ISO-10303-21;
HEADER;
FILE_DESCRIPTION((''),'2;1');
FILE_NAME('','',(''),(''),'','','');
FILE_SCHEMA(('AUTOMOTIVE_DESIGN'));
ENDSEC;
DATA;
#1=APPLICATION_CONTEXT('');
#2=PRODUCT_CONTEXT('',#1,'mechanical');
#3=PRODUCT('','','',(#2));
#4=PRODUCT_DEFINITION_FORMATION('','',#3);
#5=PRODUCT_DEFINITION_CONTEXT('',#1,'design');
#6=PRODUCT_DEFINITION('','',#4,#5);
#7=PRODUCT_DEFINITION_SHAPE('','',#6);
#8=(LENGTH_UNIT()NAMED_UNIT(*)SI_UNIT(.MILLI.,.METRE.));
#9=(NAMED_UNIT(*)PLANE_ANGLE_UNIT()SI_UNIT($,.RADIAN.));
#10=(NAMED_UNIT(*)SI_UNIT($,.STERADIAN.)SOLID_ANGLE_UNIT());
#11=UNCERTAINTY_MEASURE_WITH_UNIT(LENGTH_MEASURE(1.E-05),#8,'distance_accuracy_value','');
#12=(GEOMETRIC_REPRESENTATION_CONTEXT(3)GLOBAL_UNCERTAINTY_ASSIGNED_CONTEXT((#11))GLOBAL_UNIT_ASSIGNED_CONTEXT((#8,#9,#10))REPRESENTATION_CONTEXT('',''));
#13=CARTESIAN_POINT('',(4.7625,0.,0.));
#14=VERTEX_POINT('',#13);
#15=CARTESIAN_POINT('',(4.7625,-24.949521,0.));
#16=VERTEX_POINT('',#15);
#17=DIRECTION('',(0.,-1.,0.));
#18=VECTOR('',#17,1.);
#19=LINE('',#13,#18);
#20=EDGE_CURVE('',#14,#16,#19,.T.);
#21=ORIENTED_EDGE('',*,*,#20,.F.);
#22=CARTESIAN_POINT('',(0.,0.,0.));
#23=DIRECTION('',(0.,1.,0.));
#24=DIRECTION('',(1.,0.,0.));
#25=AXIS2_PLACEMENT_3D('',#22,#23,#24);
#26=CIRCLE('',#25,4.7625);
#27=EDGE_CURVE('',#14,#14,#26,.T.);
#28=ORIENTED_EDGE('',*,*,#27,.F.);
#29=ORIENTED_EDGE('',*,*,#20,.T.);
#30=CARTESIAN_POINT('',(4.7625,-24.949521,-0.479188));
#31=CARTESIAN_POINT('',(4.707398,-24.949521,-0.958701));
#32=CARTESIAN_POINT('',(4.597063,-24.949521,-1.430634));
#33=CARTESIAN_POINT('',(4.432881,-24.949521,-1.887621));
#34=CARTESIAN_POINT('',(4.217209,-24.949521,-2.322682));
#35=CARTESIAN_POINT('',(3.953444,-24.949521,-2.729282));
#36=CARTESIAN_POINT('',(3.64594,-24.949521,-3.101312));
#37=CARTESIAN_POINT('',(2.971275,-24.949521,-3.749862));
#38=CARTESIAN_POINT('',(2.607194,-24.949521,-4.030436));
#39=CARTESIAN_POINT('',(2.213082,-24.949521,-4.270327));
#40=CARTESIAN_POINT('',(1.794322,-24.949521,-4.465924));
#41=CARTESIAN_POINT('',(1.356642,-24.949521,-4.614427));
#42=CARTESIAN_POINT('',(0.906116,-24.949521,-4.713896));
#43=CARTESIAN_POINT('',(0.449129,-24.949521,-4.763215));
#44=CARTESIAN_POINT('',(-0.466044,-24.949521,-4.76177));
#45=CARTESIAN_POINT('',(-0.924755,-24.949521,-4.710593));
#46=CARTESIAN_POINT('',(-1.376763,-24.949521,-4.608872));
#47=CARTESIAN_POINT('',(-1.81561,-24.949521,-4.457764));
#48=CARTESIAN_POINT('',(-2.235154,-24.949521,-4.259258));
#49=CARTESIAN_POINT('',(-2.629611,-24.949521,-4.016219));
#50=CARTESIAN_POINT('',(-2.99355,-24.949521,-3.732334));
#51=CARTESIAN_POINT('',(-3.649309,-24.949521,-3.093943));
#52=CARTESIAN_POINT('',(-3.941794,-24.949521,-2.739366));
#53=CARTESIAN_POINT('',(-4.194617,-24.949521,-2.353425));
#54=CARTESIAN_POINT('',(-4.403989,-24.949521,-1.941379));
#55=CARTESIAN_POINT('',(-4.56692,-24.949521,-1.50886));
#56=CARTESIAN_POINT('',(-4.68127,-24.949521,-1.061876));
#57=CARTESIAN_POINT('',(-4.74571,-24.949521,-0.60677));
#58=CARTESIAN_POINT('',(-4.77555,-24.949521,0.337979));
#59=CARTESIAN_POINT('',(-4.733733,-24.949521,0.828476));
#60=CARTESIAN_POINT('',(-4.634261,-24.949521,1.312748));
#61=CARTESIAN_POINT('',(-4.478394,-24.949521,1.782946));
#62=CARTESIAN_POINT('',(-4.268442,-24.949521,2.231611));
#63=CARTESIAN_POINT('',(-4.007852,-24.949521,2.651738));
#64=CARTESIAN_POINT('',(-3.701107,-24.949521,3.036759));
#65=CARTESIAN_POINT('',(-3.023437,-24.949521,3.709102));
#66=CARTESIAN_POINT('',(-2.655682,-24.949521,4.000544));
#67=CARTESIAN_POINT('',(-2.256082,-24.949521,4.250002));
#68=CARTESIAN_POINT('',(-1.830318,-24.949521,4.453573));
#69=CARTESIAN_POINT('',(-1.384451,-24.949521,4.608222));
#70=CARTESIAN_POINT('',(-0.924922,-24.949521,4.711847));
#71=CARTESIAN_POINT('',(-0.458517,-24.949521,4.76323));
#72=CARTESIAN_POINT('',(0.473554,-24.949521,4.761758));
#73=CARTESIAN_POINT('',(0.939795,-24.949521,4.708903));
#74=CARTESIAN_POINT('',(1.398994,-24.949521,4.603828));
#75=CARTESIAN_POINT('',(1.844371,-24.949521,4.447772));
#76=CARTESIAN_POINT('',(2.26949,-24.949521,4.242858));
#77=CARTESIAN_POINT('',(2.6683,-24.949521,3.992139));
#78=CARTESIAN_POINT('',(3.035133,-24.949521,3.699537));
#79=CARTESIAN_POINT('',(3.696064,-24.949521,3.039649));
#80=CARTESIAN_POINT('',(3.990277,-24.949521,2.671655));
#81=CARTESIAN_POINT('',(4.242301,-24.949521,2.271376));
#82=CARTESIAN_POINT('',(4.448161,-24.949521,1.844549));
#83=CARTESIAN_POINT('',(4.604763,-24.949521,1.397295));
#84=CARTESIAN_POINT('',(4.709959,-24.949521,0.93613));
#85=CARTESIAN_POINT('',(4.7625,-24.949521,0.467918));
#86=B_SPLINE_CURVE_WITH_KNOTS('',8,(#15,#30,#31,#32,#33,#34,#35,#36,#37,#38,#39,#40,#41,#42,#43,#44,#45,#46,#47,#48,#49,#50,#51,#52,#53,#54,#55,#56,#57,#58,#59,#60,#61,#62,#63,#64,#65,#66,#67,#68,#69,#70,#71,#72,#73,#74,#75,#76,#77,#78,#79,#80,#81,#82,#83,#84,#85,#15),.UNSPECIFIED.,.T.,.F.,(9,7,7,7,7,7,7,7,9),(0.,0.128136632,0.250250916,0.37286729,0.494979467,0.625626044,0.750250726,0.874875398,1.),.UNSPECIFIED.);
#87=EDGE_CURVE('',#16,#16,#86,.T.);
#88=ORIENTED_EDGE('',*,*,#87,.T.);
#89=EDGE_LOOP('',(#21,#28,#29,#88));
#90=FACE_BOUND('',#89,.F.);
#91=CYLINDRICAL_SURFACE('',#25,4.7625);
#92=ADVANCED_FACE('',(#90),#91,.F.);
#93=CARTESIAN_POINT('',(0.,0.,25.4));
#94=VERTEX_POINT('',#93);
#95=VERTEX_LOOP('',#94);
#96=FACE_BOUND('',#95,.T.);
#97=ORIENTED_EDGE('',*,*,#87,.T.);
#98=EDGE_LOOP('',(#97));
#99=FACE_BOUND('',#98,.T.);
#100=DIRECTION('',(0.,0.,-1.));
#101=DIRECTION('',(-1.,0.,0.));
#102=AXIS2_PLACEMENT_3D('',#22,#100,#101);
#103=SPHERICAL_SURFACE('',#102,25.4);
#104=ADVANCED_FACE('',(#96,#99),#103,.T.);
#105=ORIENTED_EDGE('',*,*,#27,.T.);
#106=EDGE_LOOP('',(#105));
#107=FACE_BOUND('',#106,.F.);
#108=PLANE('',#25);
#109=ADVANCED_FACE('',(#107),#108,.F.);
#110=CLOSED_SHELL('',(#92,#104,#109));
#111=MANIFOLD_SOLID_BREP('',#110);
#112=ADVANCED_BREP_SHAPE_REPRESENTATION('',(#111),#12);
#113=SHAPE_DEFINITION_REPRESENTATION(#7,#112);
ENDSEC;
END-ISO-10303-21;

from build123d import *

# Parameters (mm, degrees)
F2_D     = 9.525
F2_DEPTH = 25.401


# Not quite as in the source:
# - a feature names something its author has since deleted; it is built from what else it names


with BuildPart() as f1:
    # F0 (on Front) → F1 (revolve)
    with BuildSketch(Plane.XZ):
        with BuildLine():
            Line((0, -25.4), (0, 25.4))
            ThreePointArc((0, 25.4), (-25.4, 0), (0, -25.4))
        make_face()
    revolve(axis=Axis((0, 0, 0), (0, 0, -1)))

    # F2 (through all, one way)
    with BuildSketch(Plane(origin=(0, 0, 0), x_dir=(1, 0, 0), z_dir=(0, 1, 0))):
        with Locations((0, 0)):
            Circle(F2_D / 2)
    extrude(amount=-F2_DEPTH, mode=Mode.SUBTRACT)


solid = f1.part
